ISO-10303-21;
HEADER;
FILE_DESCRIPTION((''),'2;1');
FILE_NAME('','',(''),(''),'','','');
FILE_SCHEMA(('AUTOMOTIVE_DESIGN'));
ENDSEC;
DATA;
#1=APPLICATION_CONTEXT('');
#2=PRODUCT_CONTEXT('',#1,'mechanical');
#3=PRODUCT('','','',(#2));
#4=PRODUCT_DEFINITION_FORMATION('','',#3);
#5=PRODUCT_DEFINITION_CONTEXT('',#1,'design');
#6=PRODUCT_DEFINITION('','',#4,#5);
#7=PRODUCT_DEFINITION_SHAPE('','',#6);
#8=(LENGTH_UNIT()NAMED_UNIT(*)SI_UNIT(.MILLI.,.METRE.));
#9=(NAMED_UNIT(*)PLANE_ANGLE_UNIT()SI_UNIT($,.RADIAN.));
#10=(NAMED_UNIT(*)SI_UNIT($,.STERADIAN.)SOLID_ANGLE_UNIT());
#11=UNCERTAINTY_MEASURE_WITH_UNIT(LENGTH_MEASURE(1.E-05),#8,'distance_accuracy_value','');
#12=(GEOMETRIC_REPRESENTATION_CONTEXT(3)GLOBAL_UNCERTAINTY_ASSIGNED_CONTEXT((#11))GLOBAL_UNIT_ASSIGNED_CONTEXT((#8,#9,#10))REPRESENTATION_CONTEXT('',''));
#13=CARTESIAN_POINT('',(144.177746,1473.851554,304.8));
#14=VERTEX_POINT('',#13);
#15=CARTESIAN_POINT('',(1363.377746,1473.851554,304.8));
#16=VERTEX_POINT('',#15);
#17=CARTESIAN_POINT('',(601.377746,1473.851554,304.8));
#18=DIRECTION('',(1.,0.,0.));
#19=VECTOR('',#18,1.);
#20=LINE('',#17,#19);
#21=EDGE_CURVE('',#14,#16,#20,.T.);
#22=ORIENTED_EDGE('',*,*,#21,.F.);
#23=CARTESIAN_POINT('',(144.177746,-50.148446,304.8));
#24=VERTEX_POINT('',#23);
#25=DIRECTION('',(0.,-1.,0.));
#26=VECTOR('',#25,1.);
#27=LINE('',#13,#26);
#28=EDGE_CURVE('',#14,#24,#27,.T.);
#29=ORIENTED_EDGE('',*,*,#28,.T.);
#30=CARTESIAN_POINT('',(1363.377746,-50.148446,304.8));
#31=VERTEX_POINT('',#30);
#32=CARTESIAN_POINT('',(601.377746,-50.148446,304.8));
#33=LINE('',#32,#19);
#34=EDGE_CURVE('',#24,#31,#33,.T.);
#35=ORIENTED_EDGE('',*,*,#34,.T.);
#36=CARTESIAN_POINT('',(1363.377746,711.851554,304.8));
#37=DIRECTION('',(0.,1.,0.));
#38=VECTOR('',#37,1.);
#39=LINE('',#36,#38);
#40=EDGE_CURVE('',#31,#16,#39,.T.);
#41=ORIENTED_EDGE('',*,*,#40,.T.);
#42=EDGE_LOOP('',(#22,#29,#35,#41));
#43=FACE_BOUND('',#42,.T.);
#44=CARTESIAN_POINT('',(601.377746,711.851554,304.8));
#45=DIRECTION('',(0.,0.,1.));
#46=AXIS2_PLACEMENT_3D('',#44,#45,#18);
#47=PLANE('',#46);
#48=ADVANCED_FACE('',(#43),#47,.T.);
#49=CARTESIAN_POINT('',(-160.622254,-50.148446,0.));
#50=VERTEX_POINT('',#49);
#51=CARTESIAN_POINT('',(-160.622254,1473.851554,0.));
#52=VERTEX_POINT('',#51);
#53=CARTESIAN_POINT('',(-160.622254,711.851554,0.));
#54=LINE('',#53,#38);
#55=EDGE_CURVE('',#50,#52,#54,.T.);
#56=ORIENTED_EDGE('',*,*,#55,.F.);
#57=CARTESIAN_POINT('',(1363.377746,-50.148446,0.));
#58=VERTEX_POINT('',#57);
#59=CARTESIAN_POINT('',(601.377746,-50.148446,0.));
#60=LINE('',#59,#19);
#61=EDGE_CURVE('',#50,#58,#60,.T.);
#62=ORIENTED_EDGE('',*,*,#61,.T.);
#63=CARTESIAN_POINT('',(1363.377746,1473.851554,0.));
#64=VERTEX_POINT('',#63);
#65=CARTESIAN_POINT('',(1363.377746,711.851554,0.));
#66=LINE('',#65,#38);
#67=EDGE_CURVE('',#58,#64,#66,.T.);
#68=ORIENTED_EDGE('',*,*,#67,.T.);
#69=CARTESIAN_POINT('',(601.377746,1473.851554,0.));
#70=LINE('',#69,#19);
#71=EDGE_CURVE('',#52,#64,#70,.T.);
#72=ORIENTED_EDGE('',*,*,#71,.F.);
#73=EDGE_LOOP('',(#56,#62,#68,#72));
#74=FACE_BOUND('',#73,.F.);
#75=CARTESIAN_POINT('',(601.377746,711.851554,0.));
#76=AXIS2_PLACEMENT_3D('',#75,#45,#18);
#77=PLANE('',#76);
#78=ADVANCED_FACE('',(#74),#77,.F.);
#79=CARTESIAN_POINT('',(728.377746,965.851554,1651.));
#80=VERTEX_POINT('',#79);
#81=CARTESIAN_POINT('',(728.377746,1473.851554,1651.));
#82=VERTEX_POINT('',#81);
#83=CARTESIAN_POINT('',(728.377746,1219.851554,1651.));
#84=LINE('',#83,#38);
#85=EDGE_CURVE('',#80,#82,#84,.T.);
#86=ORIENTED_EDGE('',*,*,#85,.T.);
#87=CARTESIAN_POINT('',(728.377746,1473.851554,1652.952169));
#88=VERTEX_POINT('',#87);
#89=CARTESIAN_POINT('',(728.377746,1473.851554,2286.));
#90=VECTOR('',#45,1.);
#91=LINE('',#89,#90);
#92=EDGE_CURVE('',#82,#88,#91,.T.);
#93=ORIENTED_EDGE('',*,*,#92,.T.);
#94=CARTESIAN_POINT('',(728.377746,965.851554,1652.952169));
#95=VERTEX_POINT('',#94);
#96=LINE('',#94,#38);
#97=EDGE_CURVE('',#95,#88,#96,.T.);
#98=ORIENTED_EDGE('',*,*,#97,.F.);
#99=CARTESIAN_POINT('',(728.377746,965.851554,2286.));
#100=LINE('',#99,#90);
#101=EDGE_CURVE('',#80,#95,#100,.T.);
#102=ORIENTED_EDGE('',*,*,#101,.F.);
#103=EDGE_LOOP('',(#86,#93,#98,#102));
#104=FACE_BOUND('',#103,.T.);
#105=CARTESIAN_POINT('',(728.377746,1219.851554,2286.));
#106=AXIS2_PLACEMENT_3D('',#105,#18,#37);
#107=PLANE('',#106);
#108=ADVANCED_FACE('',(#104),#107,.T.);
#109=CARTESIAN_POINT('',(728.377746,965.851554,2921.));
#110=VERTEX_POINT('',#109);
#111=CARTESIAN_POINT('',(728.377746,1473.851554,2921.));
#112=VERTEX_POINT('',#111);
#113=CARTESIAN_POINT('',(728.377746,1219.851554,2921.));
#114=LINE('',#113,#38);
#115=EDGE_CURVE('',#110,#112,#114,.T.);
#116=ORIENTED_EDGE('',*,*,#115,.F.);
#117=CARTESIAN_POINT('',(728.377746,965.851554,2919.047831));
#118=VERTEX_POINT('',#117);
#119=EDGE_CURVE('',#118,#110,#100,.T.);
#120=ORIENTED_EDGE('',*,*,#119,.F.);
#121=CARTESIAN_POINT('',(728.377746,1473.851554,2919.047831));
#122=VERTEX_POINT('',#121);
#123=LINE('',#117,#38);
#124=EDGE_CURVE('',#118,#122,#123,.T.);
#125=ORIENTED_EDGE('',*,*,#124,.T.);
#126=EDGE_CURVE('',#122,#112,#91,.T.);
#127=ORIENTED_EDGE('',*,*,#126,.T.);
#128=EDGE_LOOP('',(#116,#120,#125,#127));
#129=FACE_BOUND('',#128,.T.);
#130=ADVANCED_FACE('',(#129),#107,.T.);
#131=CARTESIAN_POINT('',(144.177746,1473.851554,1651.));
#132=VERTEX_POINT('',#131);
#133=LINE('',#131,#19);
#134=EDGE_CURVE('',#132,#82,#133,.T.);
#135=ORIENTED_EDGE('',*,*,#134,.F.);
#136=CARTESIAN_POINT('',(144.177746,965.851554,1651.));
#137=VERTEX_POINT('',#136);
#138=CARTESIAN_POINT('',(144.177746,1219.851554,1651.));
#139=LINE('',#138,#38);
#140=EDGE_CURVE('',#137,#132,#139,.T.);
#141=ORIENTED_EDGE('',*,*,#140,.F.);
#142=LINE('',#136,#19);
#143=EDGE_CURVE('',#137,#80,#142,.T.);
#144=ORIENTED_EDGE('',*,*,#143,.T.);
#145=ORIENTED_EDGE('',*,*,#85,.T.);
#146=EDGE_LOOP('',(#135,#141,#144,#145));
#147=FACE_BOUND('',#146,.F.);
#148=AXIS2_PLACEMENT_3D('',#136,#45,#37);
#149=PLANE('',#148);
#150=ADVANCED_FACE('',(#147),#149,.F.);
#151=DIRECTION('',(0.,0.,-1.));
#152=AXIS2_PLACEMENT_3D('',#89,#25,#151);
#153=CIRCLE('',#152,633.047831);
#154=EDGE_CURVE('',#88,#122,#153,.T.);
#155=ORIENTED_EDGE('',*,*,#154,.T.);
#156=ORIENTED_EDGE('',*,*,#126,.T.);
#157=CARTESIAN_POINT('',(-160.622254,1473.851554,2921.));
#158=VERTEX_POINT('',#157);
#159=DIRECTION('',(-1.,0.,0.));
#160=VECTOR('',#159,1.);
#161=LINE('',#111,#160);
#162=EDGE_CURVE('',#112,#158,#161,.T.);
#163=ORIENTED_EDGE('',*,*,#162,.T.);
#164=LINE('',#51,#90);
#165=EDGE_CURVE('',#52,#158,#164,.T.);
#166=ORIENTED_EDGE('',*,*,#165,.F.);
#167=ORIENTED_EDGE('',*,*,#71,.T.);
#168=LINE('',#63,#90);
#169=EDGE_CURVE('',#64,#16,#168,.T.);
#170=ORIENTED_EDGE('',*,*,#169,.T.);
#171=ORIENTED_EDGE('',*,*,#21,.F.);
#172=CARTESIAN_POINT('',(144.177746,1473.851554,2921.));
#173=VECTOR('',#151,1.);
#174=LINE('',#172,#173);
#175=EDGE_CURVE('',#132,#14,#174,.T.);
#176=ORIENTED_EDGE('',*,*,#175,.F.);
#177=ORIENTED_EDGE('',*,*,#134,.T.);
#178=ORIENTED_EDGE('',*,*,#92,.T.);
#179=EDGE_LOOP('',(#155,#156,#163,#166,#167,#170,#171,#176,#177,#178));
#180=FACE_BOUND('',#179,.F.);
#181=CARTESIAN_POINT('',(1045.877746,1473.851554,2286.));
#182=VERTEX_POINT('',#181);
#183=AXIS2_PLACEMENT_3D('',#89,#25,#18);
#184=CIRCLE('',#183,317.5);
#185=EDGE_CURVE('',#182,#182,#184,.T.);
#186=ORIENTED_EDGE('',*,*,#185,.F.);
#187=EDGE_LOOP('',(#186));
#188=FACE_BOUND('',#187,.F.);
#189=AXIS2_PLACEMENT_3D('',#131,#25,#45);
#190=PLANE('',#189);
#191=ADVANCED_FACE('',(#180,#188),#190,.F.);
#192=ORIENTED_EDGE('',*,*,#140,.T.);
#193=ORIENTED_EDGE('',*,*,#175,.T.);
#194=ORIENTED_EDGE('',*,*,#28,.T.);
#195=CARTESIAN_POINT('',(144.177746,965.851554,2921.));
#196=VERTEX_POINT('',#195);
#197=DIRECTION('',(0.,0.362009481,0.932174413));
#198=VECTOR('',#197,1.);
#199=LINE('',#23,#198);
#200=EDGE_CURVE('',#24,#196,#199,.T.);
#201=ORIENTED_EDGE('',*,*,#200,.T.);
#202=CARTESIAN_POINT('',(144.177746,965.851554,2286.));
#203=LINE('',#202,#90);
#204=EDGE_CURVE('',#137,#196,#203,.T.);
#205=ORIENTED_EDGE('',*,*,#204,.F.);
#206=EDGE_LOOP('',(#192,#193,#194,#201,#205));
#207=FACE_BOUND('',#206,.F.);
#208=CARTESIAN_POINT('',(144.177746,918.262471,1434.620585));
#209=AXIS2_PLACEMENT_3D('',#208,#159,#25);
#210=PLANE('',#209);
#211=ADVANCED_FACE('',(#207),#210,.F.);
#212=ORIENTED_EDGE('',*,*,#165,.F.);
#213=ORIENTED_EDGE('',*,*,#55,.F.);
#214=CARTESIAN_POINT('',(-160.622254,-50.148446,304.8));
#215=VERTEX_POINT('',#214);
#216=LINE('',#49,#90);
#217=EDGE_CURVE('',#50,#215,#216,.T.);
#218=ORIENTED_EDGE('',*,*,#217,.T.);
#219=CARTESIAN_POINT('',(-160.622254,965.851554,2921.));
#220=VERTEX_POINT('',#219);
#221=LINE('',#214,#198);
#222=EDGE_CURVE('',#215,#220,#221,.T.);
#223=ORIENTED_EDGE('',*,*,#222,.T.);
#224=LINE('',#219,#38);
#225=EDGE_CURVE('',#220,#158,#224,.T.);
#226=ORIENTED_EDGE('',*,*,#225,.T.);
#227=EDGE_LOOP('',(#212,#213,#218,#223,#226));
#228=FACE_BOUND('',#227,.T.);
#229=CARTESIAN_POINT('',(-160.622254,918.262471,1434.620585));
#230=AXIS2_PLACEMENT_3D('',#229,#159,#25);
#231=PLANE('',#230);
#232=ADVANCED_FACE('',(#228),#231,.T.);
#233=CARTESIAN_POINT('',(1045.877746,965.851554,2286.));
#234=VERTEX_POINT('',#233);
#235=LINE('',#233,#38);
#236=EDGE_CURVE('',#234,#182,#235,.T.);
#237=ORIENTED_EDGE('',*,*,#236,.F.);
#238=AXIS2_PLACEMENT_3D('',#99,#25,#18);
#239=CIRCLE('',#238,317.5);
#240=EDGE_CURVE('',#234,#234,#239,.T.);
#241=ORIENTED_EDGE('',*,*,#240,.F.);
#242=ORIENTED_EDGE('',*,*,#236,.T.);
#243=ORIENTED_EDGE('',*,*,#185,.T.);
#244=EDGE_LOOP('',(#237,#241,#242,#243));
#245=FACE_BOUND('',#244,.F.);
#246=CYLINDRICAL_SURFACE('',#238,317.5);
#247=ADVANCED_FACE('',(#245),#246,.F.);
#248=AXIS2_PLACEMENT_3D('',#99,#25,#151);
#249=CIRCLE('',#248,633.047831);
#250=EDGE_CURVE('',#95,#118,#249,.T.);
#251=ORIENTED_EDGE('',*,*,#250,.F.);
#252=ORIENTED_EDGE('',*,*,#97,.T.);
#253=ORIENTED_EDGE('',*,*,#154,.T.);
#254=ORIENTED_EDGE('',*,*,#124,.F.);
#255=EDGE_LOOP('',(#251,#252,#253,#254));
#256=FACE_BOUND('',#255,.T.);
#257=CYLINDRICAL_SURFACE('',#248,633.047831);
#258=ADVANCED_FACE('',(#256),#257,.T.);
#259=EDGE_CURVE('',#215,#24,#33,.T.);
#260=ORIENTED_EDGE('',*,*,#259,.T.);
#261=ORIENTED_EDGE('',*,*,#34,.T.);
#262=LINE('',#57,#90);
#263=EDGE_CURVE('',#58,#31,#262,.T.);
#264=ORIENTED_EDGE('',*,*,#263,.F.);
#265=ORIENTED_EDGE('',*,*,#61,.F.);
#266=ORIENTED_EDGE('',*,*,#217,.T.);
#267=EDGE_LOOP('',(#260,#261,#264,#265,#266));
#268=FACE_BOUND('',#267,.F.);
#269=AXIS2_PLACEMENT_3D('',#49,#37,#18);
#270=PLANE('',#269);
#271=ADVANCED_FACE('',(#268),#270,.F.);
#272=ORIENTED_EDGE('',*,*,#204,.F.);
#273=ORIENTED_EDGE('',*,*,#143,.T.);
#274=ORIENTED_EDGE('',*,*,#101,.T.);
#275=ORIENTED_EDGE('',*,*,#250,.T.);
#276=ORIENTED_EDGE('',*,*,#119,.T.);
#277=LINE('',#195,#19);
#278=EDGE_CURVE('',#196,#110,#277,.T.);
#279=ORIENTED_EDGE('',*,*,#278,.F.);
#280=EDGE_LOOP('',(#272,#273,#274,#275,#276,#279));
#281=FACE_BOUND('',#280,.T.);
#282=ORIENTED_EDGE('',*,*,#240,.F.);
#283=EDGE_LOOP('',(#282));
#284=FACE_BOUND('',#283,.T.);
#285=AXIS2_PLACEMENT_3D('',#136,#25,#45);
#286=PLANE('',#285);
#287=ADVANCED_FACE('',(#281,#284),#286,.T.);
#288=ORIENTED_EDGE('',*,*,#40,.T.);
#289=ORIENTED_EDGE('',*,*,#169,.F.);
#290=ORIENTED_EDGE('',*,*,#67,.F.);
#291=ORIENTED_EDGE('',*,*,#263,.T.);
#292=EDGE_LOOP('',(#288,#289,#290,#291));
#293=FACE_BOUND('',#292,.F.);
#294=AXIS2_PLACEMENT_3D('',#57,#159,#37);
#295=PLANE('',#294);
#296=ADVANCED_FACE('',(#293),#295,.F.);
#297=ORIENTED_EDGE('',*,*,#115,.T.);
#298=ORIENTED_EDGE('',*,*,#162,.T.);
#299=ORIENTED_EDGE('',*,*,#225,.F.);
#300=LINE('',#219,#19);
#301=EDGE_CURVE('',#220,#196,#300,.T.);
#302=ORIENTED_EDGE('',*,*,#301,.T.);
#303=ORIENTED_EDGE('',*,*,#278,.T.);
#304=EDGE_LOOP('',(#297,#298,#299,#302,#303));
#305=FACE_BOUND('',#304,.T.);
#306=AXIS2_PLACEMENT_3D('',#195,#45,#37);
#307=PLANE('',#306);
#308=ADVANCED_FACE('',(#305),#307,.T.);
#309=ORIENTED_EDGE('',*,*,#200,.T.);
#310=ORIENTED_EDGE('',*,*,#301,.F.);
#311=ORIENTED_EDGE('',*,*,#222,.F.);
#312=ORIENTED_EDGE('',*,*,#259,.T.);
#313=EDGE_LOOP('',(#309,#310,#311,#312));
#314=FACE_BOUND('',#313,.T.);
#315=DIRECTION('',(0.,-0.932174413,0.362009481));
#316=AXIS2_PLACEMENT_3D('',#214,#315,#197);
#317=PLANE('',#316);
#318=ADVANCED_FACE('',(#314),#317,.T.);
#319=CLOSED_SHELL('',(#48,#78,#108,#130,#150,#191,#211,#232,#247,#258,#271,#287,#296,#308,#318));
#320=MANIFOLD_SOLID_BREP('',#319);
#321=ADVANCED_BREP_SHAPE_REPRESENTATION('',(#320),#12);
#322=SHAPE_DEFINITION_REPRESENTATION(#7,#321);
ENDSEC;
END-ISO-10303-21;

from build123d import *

# Parameters (mm, degrees)
F0_W     = 1524
F0_H     = 1524
F1_DEPTH = 304.8
F3_DEPTH = 304.8
F4_W     = 508
F4_H     = 1270
F5_DEPTH = 584.2
F7_DEPTH = 508
F8_R     = 317.5
F9_DEPTH = 508


with BuildPart() as f1:
    # F0 (on Top) → F1 (new body)
    with BuildSketch(Plane.XY):
        with Locations((601.377745986, 711.8515538871)):
            Rectangle(F0_W, F0_H)
    extrude(amount=F1_DEPTH)

    # F2 (on face) → F3 (join)
    with BuildSketch(Plane(origin=(-160.622254014, 0, 0), x_dir=(0, -1, 0), z_dir=(-1, 0, 0))):
        Polygon((-1473.8515538871, 2921), (-1473.8515538871, 304.8), (50.1484461129, 304.8), (-965.8515538871, 2921), align=None)
    extrude(amount=-F3_DEPTH)

    # F4 (on face) → F5 (join)
    with BuildSketch(Plane.YZ.offset(144.177745986)):
        with Locations((1219.8515538871, 2286)):
            Rectangle(F4_W, F4_H)
    extrude(amount=F5_DEPTH)

    # F6 (on face) → F7 (join)
    with BuildSketch(Plane.XZ.offset(-965.8515538871)):
        with BuildLine():
            ThreePointArc((728.377745986, 1652.952168632), (1176.0101603617, 1838.3675856243), (1361.425577354, 2286))
            ThreePointArc((1361.425577354, 2286), (1176.0101603617, 2733.6324143757), (728.377745986, 2919.047831368))
            Line((728.377745986, 2919.047831368), (728.377745986, 1652.952168632))
        make_face()
    extrude(amount=-F7_DEPTH)

    # F8 (on face) → F9 (cut)
    with BuildSketch(Plane.XZ.offset(-965.8515538871)):
        with Locations((728.377745986, 2286)):
            Circle(F8_R)
    extrude(amount=-F9_DEPTH, mode=Mode.SUBTRACT)


solid = f1.part
